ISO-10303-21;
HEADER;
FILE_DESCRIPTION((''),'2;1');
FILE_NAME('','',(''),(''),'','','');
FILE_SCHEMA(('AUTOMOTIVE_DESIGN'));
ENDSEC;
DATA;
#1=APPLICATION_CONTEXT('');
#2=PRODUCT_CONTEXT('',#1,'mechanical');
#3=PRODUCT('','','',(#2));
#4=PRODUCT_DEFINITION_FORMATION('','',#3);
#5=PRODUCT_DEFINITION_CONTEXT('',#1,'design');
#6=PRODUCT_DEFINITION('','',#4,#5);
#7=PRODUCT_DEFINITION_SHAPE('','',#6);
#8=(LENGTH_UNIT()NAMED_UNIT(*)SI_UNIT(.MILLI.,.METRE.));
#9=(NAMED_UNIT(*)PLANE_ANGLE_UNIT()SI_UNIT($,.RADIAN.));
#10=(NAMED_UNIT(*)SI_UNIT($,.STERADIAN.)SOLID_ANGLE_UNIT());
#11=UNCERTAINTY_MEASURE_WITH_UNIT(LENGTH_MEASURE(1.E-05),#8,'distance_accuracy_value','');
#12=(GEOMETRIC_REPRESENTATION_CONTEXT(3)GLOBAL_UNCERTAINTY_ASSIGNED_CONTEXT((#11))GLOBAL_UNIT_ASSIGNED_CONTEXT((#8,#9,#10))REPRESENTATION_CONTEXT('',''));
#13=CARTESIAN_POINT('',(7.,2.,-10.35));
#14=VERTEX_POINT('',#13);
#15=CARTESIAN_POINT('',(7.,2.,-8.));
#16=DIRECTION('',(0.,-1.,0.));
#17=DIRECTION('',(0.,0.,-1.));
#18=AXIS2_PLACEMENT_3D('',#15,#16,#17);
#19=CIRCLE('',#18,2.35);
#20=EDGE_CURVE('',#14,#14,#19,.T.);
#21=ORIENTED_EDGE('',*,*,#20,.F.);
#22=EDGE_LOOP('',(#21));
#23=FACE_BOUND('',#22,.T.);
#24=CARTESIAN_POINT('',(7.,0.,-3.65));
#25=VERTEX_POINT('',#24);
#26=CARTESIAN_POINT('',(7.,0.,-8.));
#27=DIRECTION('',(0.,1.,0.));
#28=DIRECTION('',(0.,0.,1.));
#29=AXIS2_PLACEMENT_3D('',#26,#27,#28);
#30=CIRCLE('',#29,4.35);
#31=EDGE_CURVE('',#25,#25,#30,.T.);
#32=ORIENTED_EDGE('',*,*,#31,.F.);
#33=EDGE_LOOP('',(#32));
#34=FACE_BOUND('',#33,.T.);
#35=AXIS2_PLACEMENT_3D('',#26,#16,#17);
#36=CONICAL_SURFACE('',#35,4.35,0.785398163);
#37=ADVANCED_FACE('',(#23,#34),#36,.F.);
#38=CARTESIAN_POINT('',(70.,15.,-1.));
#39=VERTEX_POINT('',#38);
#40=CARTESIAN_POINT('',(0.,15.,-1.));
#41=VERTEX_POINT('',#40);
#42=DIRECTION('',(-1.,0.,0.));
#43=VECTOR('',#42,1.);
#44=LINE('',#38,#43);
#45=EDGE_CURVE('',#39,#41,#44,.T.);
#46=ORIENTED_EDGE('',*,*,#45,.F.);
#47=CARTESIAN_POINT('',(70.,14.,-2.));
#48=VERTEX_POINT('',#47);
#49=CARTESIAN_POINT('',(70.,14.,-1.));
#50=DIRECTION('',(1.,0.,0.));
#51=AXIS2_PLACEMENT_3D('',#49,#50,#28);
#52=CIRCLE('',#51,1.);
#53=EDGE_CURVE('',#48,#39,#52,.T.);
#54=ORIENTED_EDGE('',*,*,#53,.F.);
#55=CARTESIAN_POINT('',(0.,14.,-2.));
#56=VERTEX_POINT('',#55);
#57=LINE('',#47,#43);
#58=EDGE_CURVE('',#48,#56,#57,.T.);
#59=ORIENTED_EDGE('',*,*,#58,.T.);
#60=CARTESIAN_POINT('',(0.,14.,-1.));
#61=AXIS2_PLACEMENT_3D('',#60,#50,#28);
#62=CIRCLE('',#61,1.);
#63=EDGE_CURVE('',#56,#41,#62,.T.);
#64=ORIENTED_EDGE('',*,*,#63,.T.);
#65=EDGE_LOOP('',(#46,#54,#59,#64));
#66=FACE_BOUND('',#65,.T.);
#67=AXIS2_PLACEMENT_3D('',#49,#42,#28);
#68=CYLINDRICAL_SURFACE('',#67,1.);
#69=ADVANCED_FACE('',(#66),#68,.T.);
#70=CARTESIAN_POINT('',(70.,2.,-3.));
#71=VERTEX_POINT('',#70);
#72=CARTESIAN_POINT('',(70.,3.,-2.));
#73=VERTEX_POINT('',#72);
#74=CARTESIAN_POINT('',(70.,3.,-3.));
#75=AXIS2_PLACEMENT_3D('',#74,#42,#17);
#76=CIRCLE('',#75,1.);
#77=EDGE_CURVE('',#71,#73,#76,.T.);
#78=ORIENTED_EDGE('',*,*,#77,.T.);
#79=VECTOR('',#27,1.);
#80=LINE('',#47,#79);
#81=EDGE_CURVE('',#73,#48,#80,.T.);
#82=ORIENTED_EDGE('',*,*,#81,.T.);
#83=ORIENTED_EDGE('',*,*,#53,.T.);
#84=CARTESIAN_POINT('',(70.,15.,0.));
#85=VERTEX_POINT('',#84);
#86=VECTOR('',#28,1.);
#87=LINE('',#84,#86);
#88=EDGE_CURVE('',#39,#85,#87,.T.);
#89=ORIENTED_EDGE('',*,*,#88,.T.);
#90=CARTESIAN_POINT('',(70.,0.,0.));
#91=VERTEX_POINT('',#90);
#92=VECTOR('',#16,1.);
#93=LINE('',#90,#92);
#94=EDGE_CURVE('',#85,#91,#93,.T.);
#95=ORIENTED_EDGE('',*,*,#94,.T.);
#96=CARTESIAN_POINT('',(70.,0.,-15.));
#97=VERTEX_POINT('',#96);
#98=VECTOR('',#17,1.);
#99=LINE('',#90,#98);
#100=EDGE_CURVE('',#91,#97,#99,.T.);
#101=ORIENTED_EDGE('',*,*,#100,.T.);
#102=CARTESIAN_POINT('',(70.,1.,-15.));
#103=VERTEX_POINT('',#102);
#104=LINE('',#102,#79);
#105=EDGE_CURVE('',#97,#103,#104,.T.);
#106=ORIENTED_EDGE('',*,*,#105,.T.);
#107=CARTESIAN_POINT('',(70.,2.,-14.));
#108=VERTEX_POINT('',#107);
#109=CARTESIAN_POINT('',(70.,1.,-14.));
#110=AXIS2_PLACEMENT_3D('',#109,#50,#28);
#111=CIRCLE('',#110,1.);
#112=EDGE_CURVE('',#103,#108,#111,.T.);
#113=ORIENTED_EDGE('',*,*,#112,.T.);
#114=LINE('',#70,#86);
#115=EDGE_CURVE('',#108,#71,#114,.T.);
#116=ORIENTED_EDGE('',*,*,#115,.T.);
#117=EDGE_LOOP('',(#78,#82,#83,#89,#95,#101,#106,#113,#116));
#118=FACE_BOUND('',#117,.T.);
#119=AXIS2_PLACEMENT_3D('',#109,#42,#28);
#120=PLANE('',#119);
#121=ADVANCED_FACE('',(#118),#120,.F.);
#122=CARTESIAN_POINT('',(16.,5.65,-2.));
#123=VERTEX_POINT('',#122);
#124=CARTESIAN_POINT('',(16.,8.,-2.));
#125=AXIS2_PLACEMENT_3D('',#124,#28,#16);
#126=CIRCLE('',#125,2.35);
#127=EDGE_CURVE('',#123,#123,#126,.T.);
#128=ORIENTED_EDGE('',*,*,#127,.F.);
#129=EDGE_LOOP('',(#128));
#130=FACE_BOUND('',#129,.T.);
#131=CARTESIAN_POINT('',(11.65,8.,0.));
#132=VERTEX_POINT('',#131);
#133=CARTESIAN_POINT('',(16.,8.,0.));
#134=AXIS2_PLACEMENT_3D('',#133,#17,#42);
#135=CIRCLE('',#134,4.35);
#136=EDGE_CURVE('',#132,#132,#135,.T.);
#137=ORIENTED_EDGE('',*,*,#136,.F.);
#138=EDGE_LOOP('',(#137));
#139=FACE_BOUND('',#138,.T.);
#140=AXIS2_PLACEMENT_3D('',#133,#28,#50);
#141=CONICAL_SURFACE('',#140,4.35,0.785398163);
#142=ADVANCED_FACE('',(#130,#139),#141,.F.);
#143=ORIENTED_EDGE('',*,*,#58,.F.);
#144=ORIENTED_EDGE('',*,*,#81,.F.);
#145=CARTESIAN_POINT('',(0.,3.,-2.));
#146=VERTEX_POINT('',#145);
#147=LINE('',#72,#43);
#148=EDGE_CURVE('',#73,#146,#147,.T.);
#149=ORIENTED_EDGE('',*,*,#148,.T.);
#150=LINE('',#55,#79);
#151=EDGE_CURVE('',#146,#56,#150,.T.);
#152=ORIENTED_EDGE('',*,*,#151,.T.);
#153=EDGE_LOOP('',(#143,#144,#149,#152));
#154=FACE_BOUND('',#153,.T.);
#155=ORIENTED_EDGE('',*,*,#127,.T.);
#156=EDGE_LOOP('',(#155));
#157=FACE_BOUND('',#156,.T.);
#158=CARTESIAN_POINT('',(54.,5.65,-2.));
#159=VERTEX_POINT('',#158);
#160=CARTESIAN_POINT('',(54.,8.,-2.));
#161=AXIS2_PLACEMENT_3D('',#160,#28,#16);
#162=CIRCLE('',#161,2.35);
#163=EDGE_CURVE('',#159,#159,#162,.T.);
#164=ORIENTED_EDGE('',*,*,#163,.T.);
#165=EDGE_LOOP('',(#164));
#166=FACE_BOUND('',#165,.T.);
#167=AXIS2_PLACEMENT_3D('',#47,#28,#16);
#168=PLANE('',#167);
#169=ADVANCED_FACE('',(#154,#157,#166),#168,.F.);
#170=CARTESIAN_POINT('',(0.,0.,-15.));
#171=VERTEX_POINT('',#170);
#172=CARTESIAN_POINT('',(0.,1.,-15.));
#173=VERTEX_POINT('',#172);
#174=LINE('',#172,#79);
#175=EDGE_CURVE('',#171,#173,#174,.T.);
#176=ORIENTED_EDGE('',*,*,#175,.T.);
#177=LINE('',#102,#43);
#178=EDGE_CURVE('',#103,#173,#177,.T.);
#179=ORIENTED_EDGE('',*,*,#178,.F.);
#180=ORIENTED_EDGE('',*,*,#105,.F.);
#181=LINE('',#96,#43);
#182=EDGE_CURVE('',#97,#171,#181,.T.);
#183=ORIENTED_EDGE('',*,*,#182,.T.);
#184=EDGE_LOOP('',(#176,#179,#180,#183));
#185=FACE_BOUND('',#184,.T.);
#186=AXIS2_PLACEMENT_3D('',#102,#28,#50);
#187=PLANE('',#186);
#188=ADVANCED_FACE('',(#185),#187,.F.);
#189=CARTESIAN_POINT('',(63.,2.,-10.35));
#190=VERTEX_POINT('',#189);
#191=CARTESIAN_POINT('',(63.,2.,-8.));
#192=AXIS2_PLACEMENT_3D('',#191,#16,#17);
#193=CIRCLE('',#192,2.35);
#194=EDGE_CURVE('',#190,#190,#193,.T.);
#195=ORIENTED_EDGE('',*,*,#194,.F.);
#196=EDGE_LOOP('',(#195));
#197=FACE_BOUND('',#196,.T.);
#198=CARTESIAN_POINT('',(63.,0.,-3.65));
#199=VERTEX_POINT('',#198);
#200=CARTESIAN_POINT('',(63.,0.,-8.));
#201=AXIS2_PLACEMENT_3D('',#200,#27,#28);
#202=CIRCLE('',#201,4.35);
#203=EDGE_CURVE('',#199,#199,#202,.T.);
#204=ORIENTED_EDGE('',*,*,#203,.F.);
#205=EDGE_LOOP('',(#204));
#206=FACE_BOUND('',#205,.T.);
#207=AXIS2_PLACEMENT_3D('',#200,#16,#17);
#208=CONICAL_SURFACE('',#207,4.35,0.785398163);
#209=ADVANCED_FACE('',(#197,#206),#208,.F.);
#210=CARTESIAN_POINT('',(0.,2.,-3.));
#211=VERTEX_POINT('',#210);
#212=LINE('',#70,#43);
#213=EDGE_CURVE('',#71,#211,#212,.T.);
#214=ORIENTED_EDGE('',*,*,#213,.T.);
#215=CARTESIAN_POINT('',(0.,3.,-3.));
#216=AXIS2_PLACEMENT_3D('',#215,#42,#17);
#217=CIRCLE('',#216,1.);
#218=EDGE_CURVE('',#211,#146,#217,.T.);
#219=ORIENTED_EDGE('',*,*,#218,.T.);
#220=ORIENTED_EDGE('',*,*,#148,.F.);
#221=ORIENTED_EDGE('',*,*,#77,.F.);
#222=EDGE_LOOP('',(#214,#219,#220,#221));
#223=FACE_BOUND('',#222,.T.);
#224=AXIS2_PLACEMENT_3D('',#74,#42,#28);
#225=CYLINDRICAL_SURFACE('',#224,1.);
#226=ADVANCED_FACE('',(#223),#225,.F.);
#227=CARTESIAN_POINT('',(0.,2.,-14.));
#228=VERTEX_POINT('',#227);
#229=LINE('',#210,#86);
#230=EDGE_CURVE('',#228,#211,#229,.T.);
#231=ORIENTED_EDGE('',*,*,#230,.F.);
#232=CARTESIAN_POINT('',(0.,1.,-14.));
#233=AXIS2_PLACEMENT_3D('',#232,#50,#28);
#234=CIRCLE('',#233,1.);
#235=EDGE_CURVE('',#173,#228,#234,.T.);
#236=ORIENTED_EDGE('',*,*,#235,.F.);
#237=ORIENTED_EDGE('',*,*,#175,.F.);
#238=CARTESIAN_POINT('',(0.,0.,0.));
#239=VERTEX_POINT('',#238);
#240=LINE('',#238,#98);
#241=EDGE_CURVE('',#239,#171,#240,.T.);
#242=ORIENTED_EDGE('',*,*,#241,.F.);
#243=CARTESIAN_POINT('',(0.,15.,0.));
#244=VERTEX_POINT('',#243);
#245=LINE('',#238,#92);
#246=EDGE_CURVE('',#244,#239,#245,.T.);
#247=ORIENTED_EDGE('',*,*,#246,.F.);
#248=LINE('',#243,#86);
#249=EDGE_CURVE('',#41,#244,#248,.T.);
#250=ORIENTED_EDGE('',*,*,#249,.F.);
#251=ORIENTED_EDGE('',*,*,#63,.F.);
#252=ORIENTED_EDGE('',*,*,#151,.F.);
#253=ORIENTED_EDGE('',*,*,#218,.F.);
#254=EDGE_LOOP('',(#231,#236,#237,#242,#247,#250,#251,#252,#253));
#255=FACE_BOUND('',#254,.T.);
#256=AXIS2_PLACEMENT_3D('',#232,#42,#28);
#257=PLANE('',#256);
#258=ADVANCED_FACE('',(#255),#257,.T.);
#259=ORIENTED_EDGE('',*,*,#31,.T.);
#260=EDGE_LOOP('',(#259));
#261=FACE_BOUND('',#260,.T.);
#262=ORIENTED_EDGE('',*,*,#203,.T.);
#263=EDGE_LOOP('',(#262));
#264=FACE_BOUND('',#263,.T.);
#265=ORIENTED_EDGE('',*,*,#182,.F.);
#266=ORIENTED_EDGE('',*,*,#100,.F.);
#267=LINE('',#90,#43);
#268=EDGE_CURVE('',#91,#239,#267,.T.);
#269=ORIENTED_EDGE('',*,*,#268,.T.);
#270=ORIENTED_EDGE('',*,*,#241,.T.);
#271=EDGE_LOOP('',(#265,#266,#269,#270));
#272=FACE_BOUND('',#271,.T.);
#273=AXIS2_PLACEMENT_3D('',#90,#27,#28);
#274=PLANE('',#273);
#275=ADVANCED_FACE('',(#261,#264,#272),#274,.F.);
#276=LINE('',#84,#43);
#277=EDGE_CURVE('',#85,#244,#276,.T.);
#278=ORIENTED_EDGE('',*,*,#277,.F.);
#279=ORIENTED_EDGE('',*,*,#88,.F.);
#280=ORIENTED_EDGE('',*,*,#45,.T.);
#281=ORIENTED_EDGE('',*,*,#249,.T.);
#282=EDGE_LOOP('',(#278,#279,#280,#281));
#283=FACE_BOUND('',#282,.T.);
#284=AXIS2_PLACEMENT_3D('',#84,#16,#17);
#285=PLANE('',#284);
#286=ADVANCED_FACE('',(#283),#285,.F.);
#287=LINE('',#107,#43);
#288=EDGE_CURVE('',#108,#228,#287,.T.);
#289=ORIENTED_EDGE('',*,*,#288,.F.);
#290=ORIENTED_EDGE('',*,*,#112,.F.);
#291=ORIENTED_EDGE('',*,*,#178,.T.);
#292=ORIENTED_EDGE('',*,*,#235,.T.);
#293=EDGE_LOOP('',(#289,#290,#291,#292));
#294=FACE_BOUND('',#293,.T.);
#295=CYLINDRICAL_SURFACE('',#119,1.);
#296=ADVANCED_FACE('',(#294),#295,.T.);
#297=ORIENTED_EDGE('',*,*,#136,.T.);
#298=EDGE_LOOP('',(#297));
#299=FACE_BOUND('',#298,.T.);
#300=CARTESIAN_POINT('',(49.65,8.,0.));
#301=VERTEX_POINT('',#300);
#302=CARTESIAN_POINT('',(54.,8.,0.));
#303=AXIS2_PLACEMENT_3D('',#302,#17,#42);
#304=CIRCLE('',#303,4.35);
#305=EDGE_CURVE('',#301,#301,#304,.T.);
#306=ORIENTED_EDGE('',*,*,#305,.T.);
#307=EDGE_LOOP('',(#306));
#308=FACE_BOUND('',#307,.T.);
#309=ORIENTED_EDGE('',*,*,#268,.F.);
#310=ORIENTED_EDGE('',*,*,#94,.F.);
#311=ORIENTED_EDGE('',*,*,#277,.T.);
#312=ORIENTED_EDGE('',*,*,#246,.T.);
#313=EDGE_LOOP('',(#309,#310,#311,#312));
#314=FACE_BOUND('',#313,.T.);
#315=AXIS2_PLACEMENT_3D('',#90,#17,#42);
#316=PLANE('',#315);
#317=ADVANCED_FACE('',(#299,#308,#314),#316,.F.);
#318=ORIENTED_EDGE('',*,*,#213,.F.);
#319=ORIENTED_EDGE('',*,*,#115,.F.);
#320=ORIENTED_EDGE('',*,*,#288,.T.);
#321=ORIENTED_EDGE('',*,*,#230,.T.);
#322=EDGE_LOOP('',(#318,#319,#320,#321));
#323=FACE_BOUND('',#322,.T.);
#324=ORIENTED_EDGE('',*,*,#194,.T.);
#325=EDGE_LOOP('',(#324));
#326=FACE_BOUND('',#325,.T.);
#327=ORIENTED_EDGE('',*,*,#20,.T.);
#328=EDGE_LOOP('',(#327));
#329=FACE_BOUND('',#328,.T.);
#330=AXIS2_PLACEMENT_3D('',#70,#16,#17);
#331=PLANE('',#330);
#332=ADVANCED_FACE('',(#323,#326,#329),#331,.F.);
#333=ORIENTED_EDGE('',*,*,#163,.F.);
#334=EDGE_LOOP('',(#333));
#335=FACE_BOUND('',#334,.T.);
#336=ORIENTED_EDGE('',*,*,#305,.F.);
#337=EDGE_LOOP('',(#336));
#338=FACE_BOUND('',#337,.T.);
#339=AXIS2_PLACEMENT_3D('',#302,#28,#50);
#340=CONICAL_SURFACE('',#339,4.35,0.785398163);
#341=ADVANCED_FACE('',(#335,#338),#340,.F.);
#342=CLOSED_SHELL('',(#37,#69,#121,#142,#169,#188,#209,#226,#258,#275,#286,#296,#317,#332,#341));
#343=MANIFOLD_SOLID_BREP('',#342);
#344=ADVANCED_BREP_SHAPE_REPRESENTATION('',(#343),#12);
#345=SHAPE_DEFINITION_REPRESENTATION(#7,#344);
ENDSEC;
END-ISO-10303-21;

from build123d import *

# Parameters (mm, degrees)
EXTRUDE_1_DEPTH     = 70
SKETCH_2_R          = 2.3
CUT_EXTRUDE_1_DEPTH = 73.759879054
SKETCH_3_R          = 2.3
CUT_EXTRUDE_2_DEPTH = 73.759879054
CHAMFER_1_SIZE      = 2.05


with BuildPart() as part:
    # Эскиз1 → Бобышка-Вытянуть1 (new body)
    with BuildSketch(Plane(origin=(0, 0, 0), x_dir=(0, 0, -1), z_dir=(1, 0, 0))):
        with BuildLine():
            Line((0, 0), (0, 15))
            Line((0, 15), (1, 15))
            ThreePointArc((1, 15), (1.707106781, 14.707106781), (2, 14))
            Line((2, 14), (2, 3))
            ThreePointArc((2, 3), (2.292893219, 2.292893219), (3, 2))
            Line((3, 2), (14, 2))
            ThreePointArc((14, 2), (14.707106781, 1.707106781), (15, 1))
            Line((15, 1), (15, 0))
            Line((15, 0), (0, 0))
        make_face()
    extrude(amount=EXTRUDE_1_DEPTH)

    # Эскиз2 → Вырез-Вытянуть1 (cut, through all)
    with BuildSketch(Plane(origin=(0, 2, 0), x_dir=(1, 0, 0), z_dir=(0, 1, 0))):
        with Locations(Location((7, 8, 0), (0, 0, 270))):
            Circle(SKETCH_2_R)
        with Locations(Location((63, 8, 0), (0, 0, 270))):
            Circle(SKETCH_2_R)
    extrude(amount=-CUT_EXTRUDE_1_DEPTH, mode=Mode.SUBTRACT)

    # Эскиз3 → Вырез-Вытянуть2 (cut, through all)
    with BuildSketch(Plane(origin=(0, 0, -2), x_dir=(-1, 0, 0), z_dir=(0, 0, -1))):
        with Locations(Location((-16, 8, 0), (0, 0, 90))):
            Circle(SKETCH_3_R)
        with Locations(Location((-54, 8, 0), (0, 0, 90))):
            Circle(SKETCH_3_R)
    extrude(amount=-CUT_EXTRUDE_2_DEPTH, mode=Mode.SUBTRACT)

    # Фаска1
    # the kernel refuses this chamfer: 2.05 mm, written as the material it takes off along each edge
    with BuildSketch(Plane(origin=(63, 0, -8), x_dir=(0, 0, 1), z_dir=(-1, 0, 0))) as chamfer_1_piece_1:
        Polygon((2.3 + CHAMFER_1_SIZE, 0), (2.3, CHAMFER_1_SIZE), (2.3, 0), align=None)
    revolve(axis=Axis((63, 0, -8), (0, 1, 0)), mode=Mode.SUBTRACT)
    with BuildSketch(Plane(origin=(7, 0, -8), x_dir=(0, 0, 1), z_dir=(-1, 0, 0))) as chamfer_1_piece_2:
        Polygon((2.3 + CHAMFER_1_SIZE, 0), (2.3, CHAMFER_1_SIZE), (2.3, 0), align=None)
    revolve(axis=Axis((7, 0, -8), (0, 1, 0)), mode=Mode.SUBTRACT)
    with BuildSketch(Plane(origin=(54, 8, 0), x_dir=(0, 1, 0), z_dir=(-1, 0, 0))) as chamfer_1_piece_3:
        Polygon((2.3 + CHAMFER_1_SIZE, 0), (2.3, CHAMFER_1_SIZE), (2.3, 0), align=None)
    revolve(axis=Axis((54, 8, 0), (0, 0, -1)), mode=Mode.SUBTRACT)
    with BuildSketch(Plane(origin=(16, 8, 0), x_dir=(0, 1, 0), z_dir=(-1, 0, 0))) as chamfer_1_piece_4:
        Polygon((2.3 + CHAMFER_1_SIZE, 0), (2.3, CHAMFER_1_SIZE), (2.3, 0), align=None)
    revolve(axis=Axis((16, 8, 0), (0, 0, -1)), mode=Mode.SUBTRACT)


solid = part.part
